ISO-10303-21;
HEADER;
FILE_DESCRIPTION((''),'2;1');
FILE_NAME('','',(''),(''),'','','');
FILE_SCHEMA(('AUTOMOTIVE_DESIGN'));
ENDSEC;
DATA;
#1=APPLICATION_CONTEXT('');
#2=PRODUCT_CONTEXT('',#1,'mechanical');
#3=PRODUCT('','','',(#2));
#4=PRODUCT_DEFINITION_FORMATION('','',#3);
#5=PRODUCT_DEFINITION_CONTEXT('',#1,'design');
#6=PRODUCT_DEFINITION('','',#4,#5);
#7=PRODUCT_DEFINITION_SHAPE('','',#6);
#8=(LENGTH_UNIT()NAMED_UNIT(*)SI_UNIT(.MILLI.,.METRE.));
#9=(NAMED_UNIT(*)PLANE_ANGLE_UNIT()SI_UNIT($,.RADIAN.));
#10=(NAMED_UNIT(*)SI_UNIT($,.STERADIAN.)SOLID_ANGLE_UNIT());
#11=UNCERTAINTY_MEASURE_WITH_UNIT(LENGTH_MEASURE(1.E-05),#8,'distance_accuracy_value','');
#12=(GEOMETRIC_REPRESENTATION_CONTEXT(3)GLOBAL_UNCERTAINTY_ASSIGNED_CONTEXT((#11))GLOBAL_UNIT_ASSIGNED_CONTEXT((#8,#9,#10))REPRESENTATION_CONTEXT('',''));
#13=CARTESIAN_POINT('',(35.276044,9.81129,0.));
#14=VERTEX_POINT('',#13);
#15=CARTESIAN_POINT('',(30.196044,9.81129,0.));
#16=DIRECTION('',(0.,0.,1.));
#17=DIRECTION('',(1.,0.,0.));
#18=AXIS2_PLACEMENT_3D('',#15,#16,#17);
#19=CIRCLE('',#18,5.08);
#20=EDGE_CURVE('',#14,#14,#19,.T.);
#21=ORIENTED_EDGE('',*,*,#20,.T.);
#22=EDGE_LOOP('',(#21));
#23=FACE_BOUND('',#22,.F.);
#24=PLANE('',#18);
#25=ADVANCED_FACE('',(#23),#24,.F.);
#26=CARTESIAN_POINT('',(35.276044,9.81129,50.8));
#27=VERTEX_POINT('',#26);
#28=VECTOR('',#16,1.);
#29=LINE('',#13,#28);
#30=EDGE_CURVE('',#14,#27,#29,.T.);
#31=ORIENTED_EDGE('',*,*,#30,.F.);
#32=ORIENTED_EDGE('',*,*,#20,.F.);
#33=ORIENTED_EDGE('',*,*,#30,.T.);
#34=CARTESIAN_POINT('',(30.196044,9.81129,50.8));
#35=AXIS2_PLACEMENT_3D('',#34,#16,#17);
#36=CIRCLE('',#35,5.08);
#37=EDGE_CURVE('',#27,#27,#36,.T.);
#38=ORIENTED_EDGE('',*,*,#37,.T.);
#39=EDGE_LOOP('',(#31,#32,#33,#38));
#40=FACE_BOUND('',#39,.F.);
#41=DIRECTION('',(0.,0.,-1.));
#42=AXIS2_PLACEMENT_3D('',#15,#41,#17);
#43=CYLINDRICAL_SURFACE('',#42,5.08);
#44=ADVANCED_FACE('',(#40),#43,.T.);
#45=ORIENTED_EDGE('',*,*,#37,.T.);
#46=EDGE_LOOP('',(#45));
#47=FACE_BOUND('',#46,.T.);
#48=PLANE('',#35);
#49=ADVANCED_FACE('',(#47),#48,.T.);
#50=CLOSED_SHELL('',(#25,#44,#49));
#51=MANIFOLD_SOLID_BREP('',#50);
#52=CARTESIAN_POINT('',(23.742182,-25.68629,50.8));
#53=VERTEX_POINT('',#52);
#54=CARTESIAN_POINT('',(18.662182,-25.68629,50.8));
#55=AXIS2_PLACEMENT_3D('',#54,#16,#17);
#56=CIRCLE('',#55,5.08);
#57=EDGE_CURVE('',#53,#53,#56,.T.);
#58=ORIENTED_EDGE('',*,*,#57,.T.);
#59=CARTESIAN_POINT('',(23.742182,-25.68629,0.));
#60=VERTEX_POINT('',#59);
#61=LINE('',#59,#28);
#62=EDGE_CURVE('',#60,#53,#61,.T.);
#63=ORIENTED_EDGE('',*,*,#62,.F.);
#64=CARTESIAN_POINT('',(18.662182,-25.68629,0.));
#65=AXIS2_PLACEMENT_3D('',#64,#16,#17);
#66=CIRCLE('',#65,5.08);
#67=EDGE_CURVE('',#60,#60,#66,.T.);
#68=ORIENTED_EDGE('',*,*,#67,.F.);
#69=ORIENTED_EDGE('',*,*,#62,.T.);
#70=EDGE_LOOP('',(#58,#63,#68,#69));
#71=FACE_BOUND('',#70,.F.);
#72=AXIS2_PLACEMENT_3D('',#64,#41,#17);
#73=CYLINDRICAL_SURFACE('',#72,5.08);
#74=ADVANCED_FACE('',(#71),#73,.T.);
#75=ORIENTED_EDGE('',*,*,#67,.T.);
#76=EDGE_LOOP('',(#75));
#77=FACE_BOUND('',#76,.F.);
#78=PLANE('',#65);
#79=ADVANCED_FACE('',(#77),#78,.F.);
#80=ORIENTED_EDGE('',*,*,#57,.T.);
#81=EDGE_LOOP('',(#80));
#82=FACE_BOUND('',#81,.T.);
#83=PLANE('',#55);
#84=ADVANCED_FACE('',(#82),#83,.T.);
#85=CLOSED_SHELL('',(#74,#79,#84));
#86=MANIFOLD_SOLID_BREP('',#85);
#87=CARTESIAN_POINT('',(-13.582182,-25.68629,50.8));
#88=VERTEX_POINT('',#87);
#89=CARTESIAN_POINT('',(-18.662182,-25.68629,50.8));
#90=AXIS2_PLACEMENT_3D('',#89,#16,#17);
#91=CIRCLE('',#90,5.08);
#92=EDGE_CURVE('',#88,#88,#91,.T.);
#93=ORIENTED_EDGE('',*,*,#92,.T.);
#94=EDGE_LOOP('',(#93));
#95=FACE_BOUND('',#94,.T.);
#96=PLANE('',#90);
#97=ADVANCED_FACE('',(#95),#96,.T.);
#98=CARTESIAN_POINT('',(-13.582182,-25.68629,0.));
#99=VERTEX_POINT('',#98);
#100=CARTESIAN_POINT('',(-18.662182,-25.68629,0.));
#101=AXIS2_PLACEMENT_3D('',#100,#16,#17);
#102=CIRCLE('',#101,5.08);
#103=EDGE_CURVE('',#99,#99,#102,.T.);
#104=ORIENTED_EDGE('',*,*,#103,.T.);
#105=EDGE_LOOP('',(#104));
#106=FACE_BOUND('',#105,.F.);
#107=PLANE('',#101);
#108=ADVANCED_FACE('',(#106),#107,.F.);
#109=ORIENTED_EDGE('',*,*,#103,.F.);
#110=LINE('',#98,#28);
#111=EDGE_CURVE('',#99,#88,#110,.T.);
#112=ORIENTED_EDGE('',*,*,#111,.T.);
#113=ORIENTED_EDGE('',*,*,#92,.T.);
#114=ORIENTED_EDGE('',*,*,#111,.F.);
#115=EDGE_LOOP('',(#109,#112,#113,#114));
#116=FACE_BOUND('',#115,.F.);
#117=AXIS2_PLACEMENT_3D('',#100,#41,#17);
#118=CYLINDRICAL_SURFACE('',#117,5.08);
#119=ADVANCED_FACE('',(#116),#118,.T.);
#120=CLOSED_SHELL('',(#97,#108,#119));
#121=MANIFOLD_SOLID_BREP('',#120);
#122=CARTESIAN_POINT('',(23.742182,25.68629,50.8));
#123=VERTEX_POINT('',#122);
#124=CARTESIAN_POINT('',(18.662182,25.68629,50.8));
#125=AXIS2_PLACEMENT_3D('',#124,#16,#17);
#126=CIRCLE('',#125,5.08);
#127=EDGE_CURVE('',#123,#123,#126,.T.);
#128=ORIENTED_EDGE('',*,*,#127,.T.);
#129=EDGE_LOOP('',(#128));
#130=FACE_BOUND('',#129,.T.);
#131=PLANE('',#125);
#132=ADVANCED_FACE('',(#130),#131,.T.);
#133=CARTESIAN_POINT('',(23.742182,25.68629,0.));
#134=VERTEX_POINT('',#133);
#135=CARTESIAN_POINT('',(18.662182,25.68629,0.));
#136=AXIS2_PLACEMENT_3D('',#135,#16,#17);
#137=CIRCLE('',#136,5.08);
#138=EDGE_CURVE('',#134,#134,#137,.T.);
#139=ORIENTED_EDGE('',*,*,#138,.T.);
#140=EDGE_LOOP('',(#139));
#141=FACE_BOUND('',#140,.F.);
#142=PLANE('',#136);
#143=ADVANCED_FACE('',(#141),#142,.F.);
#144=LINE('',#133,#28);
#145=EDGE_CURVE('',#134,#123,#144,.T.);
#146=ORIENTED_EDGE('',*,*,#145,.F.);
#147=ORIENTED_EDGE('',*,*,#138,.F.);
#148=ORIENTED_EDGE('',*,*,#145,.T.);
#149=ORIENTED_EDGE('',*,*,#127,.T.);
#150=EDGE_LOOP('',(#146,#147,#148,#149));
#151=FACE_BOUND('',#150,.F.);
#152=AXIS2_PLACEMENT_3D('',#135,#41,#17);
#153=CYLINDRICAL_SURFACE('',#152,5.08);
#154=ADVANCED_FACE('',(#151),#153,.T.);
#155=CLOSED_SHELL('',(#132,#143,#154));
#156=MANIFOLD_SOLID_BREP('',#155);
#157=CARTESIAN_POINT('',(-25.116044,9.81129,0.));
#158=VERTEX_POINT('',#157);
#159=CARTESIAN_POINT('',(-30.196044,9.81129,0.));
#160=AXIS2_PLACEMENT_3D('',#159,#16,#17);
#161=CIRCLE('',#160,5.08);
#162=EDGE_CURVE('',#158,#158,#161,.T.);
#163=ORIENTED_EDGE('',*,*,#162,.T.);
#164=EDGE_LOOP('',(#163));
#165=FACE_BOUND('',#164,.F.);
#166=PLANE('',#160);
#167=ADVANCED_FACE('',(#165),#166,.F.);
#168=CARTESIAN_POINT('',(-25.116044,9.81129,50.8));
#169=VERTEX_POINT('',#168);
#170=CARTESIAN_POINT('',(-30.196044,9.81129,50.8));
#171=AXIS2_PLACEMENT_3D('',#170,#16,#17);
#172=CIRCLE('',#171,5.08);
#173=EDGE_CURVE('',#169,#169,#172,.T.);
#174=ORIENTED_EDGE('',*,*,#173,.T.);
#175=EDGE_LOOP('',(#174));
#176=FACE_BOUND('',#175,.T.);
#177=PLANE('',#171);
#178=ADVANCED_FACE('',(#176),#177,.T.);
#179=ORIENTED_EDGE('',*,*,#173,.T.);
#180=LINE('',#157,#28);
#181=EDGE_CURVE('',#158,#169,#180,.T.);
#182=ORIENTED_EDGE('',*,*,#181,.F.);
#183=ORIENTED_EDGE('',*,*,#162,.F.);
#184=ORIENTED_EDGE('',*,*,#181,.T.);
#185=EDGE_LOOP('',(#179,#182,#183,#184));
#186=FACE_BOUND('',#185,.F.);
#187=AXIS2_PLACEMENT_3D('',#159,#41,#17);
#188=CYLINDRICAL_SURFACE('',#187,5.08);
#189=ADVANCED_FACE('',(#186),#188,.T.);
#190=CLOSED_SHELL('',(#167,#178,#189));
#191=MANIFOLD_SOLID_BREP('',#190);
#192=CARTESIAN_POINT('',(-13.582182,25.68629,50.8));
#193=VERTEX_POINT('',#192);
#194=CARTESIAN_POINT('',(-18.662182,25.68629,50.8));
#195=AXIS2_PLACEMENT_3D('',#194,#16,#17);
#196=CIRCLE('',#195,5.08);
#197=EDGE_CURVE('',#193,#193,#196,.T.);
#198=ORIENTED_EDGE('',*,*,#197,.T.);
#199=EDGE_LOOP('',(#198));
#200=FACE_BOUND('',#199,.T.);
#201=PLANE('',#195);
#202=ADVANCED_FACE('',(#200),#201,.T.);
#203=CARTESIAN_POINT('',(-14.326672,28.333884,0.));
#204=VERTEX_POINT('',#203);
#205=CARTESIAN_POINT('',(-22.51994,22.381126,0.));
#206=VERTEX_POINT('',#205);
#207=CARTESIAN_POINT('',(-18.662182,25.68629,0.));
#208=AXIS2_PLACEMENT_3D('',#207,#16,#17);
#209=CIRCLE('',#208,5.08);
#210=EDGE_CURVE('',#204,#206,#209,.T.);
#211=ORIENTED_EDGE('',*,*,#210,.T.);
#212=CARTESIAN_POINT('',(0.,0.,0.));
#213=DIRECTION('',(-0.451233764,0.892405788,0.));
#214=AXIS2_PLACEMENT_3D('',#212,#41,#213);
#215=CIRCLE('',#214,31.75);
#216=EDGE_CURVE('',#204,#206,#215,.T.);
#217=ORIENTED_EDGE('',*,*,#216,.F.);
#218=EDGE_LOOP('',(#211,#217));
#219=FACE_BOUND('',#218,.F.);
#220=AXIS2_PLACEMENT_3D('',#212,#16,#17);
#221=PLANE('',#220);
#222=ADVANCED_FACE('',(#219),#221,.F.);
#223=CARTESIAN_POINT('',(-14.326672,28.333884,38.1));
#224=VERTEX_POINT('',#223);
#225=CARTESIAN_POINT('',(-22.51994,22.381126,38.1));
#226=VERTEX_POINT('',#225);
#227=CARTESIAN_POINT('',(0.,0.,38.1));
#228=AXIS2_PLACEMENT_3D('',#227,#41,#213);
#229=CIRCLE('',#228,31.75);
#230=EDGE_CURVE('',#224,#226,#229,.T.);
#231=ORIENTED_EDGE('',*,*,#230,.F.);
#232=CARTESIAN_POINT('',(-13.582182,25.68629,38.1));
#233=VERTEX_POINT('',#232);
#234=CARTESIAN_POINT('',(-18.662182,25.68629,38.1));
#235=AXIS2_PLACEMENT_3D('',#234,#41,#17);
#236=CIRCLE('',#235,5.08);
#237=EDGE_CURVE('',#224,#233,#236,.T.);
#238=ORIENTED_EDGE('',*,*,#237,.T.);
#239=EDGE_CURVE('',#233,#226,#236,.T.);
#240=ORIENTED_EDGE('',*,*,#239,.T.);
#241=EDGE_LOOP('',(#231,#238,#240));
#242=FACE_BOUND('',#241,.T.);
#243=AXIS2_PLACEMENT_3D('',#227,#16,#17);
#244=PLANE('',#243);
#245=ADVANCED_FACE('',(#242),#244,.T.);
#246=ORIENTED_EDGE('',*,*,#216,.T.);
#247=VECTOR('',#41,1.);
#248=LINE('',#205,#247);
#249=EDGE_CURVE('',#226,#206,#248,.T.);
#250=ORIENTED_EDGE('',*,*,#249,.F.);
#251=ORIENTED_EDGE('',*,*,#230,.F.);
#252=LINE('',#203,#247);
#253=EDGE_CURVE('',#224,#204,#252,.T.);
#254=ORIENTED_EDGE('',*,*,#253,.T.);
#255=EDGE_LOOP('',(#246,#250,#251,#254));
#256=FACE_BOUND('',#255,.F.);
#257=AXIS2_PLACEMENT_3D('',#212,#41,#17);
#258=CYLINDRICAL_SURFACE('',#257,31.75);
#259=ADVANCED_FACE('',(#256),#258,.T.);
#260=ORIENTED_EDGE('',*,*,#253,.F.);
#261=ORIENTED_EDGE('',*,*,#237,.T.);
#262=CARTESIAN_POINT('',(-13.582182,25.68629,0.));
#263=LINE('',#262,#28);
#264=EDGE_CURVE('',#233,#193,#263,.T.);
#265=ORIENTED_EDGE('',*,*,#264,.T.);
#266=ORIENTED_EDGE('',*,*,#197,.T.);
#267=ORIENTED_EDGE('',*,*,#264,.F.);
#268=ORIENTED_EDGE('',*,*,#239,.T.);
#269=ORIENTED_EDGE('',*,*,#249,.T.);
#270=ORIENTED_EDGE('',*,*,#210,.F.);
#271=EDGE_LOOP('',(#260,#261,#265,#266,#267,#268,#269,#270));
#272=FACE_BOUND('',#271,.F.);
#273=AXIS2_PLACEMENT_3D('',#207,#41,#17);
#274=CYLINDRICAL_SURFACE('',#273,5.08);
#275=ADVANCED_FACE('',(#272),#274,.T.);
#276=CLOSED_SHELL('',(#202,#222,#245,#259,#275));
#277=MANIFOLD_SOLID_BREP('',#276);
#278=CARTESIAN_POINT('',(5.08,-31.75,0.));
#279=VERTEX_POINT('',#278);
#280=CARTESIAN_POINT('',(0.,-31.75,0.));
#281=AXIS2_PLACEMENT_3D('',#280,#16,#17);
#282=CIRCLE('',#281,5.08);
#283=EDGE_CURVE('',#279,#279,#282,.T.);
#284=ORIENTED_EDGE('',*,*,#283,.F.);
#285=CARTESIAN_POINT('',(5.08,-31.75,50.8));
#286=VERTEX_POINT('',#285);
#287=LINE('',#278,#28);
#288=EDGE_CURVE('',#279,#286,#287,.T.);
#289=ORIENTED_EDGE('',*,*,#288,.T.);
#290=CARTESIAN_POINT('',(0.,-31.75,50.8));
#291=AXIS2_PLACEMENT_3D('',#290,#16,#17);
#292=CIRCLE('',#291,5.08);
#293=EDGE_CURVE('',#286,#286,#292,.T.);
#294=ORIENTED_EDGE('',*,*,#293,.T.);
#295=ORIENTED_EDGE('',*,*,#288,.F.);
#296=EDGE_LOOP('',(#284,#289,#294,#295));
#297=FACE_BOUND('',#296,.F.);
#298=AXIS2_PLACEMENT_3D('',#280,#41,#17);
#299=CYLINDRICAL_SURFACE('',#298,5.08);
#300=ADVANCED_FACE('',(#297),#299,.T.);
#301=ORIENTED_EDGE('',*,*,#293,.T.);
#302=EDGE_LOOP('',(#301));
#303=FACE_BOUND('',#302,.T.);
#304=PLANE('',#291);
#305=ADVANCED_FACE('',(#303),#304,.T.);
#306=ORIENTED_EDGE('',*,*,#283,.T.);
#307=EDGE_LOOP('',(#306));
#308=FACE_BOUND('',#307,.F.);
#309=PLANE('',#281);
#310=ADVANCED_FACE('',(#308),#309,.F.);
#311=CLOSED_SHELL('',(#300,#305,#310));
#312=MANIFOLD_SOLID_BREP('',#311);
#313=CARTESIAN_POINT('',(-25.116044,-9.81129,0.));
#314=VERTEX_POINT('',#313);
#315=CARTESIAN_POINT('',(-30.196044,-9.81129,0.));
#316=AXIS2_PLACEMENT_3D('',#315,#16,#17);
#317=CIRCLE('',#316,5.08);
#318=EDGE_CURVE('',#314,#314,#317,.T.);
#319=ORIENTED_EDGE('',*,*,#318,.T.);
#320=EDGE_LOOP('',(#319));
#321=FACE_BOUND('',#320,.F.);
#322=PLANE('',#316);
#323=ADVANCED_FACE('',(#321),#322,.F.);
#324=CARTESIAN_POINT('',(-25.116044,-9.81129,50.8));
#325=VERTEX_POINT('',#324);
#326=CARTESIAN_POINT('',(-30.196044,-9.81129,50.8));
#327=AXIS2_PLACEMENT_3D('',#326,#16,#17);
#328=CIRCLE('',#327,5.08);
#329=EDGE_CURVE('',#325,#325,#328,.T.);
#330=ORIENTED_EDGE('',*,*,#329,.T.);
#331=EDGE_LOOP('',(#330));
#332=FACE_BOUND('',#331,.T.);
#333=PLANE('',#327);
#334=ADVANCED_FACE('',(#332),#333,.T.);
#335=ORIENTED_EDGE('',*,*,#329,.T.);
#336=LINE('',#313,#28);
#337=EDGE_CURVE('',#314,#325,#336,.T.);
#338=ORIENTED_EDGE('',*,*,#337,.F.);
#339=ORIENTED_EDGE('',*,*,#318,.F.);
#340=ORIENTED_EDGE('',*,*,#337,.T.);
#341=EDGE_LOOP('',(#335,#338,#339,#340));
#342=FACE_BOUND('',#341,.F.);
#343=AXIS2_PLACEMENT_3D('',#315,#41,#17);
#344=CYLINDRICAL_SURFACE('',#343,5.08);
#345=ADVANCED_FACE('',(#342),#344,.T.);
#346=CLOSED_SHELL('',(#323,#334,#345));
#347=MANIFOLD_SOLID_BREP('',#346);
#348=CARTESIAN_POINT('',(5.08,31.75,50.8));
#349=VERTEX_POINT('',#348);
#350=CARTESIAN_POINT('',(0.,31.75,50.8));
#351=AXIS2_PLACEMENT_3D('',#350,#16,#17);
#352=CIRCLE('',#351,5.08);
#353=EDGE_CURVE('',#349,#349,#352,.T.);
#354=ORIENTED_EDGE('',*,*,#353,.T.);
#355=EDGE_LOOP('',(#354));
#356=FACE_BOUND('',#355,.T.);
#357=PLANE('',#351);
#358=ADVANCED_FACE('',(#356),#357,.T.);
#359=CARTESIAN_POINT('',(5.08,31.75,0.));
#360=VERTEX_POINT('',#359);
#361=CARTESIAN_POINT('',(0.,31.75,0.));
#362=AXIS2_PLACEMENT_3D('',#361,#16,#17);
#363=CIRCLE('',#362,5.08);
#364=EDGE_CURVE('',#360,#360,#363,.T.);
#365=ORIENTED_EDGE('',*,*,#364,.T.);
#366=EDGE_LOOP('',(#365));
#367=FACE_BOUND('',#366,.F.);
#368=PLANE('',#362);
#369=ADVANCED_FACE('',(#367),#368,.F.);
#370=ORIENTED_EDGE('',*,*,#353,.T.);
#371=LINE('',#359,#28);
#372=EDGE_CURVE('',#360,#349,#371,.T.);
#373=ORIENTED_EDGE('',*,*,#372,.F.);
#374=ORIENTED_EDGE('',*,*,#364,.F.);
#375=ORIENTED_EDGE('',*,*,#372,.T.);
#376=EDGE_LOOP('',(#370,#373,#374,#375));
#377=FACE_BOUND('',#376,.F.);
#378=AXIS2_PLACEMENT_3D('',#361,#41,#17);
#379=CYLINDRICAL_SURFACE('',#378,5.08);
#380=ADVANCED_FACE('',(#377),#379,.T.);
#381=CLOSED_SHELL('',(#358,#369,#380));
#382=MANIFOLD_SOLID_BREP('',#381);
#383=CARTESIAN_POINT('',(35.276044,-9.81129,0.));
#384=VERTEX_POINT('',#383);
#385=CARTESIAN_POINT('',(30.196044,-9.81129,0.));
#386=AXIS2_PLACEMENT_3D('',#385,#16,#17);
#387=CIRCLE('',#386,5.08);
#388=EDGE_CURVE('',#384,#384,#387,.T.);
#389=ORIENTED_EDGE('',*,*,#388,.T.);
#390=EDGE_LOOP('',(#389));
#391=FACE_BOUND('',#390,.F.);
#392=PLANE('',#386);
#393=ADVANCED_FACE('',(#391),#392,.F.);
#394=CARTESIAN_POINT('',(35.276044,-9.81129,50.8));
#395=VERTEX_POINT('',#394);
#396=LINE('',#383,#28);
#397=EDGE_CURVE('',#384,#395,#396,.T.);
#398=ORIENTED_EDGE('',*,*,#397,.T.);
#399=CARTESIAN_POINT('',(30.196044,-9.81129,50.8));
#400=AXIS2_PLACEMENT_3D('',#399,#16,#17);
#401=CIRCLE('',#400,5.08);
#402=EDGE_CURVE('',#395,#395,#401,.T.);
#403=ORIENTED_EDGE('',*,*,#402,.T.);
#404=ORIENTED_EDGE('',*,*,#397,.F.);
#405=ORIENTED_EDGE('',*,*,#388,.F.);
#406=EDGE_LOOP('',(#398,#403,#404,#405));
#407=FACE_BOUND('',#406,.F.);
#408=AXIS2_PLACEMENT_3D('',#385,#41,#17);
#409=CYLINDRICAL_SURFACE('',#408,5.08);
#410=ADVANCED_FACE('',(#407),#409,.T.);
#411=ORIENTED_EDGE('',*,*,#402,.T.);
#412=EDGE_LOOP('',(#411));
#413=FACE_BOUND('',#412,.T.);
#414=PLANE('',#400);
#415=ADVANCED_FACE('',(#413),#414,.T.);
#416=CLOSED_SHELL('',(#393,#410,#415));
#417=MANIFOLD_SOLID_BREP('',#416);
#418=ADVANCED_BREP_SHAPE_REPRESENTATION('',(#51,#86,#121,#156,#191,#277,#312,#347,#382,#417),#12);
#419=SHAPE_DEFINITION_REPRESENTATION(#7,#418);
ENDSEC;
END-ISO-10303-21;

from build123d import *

# Parameters (mm, degrees)
F0_R     = 31.75
F1_DEPTH = 38.1
F2_R     = 5.08
F3_DEPTH = 50.8


with BuildPart() as f1:
    # F0 (on Top) → F1 (new body)
    with BuildSketch(Plane.XY):
        Circle(F0_R)
    extrude(amount=F1_DEPTH)

    # F2 (on Top) → F3, piece 2 (join)
    with BuildSketch(Plane.XY):
        with Locations((-18.6621817603, 25.6862895714)):
            Circle(F2_R)
    extrude(amount=F3_DEPTH)


with BuildPart() as f3:
    # F2 (on Top) → F3 (new body)
    with BuildSketch(Plane.XY):
        with Locations((0, 31.75)):
            Circle(F2_R)
    extrude(amount=F3_DEPTH)


with BuildPart() as f3b:
    # F2 (on Top) → F3, piece 3 (new body)
    with BuildSketch(Plane.XY):
        with Locations((-30.1960443924, 9.8112895714)):
            Circle(F2_R)
    extrude(amount=F3_DEPTH)


with BuildPart() as f3c:
    # F2 (on Top) → F3, piece 4 (new body)
    with BuildSketch(Plane.XY):
        with Locations((-30.1960443924, -9.8112895714)):
            Circle(F2_R)
    extrude(amount=F3_DEPTH)


with BuildPart() as f3d:
    # F2 (on Top) → F3, piece 5 (new body)
    with BuildSketch(Plane.XY):
        with Locations((-18.6621817603, -25.6862895714)):
            Circle(F2_R)
    extrude(amount=F3_DEPTH)


with BuildPart() as f3e:
    # F2 (on Top) → F3, piece 6 (new body)
    with BuildSketch(Plane.XY):
        with Locations((0, -31.75)):
            Circle(F2_R)
    extrude(amount=F3_DEPTH)


with BuildPart() as f3f:
    # F2 (on Top) → F3, piece 7 (new body)
    with BuildSketch(Plane.XY):
        with Locations((18.6621817603, -25.6862895714)):
            Circle(F2_R)
    extrude(amount=F3_DEPTH)


with BuildPart() as f3g:
    # F2 (on Top) → F3, piece 8 (new body)
    with BuildSketch(Plane.XY):
        with Locations((30.1960443924, -9.8112895714)):
            Circle(F2_R)
    extrude(amount=F3_DEPTH)


with BuildPart() as f3h:
    # F2 (on Top) → F3, piece 9 (new body)
    with BuildSketch(Plane.XY):
        with Locations((30.1960443924, 9.8112895714)):
            Circle(F2_R)
    extrude(amount=F3_DEPTH)


with BuildPart() as f3i:
    # F2 (on Top) → F3, piece 10 (new body)
    with BuildSketch(Plane.XY):
        with Locations((18.6621817603, 25.6862895714)):
            Circle(F2_R)
    extrude(amount=F3_DEPTH)


solid = Compound([f1.part, f3.part, f3b.part, f3c.part, f3d.part, f3e.part, f3f.part, f3g.part, f3h.part, f3i.part])
